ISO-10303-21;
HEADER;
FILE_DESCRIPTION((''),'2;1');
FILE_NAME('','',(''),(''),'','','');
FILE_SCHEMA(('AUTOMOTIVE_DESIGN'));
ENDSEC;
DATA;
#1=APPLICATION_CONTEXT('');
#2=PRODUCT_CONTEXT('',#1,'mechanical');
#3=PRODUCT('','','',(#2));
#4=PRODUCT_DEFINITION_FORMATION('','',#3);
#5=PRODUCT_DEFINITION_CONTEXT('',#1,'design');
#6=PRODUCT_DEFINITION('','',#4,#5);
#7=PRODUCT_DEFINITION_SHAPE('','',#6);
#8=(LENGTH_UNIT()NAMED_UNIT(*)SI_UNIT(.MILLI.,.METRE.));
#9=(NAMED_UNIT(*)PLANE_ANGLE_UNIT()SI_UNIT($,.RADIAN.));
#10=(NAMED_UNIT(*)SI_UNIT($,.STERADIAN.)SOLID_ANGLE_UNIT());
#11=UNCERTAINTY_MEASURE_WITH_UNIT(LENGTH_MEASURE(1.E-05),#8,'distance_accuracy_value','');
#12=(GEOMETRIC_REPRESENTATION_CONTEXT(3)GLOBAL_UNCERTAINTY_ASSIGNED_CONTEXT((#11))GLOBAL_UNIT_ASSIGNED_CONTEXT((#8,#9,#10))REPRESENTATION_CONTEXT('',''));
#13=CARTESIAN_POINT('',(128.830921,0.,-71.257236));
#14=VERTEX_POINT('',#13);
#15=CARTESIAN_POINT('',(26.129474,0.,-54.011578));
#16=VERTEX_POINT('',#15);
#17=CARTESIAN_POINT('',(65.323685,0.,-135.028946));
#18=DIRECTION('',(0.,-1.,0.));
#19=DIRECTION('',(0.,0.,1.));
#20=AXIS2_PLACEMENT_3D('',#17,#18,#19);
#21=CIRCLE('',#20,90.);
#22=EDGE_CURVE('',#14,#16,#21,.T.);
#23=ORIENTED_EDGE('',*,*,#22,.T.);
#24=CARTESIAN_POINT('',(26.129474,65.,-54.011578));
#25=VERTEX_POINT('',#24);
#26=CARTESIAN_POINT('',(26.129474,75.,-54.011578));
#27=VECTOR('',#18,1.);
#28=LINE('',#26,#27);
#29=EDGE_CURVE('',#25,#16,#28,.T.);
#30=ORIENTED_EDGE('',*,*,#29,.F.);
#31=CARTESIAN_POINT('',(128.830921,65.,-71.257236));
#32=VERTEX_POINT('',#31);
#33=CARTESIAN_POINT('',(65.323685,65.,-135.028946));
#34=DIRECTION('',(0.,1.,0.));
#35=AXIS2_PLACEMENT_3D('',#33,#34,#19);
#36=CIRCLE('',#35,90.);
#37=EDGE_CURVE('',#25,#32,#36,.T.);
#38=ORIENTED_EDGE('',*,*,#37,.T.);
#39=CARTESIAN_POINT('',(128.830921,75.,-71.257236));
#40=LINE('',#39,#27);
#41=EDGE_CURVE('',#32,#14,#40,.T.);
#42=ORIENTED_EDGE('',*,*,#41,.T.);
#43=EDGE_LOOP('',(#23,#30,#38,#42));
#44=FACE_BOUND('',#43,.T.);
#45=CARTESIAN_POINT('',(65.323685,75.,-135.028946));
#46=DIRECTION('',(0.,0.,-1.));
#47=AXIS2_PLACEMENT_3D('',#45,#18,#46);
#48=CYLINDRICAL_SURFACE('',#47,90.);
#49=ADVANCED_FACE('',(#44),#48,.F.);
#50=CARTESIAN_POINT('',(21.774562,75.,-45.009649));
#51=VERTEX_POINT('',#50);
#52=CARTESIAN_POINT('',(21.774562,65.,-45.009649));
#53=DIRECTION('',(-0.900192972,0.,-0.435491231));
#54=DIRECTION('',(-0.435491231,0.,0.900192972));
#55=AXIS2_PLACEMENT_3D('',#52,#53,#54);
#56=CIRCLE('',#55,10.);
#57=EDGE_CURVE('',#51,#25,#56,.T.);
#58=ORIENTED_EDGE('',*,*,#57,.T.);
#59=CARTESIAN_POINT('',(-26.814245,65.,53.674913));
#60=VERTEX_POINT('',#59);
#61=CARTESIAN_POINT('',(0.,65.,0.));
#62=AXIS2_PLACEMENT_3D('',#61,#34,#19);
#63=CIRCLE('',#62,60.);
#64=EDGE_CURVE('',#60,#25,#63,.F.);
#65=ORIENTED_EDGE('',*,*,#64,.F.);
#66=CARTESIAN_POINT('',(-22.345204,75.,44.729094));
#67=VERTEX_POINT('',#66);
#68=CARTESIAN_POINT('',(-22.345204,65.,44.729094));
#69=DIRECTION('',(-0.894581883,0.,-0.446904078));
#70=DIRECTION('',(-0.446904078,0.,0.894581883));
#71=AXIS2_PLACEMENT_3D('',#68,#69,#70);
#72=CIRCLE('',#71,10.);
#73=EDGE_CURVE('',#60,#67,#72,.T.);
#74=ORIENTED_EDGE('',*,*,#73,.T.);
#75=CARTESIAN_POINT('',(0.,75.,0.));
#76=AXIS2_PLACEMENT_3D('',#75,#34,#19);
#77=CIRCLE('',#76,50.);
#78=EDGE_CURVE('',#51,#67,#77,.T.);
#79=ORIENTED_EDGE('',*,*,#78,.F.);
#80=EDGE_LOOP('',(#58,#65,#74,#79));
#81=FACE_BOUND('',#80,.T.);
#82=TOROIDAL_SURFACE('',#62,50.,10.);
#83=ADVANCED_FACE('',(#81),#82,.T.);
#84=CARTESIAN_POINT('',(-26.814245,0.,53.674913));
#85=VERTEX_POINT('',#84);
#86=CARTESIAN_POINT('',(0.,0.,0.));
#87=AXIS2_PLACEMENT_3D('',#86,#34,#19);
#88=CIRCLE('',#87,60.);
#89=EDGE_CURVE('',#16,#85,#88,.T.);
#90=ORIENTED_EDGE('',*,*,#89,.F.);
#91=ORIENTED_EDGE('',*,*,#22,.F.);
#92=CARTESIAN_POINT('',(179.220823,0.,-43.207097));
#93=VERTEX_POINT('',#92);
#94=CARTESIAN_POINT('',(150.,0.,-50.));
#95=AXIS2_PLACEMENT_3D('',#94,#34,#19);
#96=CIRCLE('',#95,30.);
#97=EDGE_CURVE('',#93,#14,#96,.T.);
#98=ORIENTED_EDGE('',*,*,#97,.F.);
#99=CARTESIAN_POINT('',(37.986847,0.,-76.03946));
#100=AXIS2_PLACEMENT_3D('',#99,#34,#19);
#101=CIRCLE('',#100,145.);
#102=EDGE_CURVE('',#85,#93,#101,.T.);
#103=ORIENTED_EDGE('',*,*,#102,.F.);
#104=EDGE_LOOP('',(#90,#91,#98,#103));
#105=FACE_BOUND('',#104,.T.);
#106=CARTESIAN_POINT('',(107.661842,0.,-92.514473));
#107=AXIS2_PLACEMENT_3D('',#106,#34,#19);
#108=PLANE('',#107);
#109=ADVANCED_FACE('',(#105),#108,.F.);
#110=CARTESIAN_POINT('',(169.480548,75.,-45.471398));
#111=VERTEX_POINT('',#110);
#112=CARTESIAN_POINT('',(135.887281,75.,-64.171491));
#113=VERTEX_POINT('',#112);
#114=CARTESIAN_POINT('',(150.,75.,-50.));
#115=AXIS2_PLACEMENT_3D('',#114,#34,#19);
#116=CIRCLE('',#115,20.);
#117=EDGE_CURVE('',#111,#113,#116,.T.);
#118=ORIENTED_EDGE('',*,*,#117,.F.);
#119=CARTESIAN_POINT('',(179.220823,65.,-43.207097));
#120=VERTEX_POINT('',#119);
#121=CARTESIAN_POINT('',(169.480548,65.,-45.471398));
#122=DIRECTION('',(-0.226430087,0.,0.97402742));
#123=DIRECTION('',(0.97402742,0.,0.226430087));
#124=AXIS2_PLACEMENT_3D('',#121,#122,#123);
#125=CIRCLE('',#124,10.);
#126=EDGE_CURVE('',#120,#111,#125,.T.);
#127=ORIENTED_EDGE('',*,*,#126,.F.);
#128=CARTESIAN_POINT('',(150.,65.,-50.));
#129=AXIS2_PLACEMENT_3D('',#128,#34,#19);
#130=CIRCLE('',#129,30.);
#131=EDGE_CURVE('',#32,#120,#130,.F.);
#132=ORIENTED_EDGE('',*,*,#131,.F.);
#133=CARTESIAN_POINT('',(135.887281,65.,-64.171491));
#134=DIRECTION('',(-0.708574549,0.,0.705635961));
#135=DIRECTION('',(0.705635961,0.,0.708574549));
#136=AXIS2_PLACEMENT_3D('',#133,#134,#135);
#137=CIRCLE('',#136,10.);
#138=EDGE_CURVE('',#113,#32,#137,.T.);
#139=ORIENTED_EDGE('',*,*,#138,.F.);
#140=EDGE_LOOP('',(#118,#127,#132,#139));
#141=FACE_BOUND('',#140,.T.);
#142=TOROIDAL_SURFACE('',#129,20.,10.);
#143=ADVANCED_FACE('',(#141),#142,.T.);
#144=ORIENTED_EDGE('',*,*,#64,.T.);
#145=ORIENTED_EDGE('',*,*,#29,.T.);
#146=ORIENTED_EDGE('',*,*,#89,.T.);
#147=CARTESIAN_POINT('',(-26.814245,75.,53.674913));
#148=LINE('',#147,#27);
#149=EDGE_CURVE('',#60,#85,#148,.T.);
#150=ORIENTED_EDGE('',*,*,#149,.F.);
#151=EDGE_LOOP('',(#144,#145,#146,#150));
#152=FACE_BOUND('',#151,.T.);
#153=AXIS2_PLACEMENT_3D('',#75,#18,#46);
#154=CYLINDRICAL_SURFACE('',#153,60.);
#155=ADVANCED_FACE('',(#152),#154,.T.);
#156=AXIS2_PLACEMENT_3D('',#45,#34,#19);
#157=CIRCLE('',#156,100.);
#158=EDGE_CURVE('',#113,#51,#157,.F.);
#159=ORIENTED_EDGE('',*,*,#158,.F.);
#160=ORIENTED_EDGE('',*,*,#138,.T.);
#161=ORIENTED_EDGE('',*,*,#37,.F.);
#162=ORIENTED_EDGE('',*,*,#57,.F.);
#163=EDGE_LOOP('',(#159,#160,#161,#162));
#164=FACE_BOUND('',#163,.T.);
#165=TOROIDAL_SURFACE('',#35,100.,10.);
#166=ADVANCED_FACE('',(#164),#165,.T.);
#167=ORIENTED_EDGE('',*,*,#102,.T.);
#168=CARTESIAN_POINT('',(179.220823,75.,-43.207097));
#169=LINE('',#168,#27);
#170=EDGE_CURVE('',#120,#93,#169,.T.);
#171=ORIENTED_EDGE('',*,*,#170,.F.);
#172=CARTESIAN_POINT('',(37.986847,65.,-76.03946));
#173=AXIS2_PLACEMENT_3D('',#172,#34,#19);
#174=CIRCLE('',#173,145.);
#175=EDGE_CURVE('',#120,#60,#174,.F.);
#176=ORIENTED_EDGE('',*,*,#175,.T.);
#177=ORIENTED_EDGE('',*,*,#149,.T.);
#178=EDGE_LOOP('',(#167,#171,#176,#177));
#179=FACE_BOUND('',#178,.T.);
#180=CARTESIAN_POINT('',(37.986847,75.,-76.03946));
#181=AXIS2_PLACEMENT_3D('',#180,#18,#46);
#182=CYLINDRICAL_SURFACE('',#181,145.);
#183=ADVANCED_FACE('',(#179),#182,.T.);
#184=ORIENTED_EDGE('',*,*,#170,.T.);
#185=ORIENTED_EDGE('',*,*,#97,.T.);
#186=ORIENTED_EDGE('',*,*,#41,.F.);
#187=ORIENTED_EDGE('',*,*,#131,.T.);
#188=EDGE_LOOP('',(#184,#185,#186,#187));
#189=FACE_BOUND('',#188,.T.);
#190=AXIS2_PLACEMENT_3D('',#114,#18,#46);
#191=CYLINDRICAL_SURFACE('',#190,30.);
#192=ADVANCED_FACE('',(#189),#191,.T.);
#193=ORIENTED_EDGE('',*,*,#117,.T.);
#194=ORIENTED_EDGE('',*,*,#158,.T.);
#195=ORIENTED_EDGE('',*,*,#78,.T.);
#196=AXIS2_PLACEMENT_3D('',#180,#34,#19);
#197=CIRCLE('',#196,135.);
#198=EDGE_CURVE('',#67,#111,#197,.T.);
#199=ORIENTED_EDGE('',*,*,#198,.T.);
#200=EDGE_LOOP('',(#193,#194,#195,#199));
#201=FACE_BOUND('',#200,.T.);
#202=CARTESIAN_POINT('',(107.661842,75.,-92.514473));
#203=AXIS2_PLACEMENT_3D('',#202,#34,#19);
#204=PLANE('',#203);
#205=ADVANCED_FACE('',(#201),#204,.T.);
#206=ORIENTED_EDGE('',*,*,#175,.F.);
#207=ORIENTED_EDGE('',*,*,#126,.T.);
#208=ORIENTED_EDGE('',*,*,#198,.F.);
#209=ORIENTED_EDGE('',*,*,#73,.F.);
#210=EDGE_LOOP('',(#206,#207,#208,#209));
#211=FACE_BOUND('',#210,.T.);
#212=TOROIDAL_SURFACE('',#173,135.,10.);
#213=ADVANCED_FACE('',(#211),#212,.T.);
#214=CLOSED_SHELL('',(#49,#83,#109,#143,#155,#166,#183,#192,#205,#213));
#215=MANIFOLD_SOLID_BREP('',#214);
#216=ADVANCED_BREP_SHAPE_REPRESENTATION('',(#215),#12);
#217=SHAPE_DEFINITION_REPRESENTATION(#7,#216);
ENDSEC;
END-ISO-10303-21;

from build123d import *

# Parameters (mm, degrees)
BOSS_EXTRUDE1_DEPTH = 75
FILLET1_R           = 10


# Read off the part's stored shape, not the designer's step: Boss-Extrude1
with BuildPart() as part:
    # Boss-Extrude1 outline → Boss-Extrude1 (new body)
    with BuildSketch(Plane(origin=(0, 0, 0), x_dir=(1, 0, 0), z_dir=(0, 1, 0))):
        with BuildLine():
            ThreePointArc((179.220822611, 43.207097385), (164.591443385, 76.212397447), (128.83092118, 71.25723646))
            ThreePointArc((128.83092118, 71.25723646), (80.227844704, 46.271602396), (26.129473888, 54.011578336))
            ThreePointArc((26.129473888, 54.011578336), (-53.844334239, 26.472394497), (-26.8142447, -53.674912959))
            ThreePointArc((-26.8142447, -53.674912959), (99.687960456, -55.177812298), (179.220822611, 43.207097385))
        make_face()
    extrude(amount=BOSS_EXTRUDE1_DEPTH)

    # Fillet1
    fillet1_edges = [part.edges().sort_by_distance(p)[0] for p in [
        (99.687960456, 75, 55.177812298),
        (164.591443385, 75, -76.212397447),
        (80.227844704, 75, -46.271602396),
        (-53.844334239, 75, -26.472394497),
    ]]
    fillet(fillet1_edges, radius=FILLET1_R)


solid = part.part
